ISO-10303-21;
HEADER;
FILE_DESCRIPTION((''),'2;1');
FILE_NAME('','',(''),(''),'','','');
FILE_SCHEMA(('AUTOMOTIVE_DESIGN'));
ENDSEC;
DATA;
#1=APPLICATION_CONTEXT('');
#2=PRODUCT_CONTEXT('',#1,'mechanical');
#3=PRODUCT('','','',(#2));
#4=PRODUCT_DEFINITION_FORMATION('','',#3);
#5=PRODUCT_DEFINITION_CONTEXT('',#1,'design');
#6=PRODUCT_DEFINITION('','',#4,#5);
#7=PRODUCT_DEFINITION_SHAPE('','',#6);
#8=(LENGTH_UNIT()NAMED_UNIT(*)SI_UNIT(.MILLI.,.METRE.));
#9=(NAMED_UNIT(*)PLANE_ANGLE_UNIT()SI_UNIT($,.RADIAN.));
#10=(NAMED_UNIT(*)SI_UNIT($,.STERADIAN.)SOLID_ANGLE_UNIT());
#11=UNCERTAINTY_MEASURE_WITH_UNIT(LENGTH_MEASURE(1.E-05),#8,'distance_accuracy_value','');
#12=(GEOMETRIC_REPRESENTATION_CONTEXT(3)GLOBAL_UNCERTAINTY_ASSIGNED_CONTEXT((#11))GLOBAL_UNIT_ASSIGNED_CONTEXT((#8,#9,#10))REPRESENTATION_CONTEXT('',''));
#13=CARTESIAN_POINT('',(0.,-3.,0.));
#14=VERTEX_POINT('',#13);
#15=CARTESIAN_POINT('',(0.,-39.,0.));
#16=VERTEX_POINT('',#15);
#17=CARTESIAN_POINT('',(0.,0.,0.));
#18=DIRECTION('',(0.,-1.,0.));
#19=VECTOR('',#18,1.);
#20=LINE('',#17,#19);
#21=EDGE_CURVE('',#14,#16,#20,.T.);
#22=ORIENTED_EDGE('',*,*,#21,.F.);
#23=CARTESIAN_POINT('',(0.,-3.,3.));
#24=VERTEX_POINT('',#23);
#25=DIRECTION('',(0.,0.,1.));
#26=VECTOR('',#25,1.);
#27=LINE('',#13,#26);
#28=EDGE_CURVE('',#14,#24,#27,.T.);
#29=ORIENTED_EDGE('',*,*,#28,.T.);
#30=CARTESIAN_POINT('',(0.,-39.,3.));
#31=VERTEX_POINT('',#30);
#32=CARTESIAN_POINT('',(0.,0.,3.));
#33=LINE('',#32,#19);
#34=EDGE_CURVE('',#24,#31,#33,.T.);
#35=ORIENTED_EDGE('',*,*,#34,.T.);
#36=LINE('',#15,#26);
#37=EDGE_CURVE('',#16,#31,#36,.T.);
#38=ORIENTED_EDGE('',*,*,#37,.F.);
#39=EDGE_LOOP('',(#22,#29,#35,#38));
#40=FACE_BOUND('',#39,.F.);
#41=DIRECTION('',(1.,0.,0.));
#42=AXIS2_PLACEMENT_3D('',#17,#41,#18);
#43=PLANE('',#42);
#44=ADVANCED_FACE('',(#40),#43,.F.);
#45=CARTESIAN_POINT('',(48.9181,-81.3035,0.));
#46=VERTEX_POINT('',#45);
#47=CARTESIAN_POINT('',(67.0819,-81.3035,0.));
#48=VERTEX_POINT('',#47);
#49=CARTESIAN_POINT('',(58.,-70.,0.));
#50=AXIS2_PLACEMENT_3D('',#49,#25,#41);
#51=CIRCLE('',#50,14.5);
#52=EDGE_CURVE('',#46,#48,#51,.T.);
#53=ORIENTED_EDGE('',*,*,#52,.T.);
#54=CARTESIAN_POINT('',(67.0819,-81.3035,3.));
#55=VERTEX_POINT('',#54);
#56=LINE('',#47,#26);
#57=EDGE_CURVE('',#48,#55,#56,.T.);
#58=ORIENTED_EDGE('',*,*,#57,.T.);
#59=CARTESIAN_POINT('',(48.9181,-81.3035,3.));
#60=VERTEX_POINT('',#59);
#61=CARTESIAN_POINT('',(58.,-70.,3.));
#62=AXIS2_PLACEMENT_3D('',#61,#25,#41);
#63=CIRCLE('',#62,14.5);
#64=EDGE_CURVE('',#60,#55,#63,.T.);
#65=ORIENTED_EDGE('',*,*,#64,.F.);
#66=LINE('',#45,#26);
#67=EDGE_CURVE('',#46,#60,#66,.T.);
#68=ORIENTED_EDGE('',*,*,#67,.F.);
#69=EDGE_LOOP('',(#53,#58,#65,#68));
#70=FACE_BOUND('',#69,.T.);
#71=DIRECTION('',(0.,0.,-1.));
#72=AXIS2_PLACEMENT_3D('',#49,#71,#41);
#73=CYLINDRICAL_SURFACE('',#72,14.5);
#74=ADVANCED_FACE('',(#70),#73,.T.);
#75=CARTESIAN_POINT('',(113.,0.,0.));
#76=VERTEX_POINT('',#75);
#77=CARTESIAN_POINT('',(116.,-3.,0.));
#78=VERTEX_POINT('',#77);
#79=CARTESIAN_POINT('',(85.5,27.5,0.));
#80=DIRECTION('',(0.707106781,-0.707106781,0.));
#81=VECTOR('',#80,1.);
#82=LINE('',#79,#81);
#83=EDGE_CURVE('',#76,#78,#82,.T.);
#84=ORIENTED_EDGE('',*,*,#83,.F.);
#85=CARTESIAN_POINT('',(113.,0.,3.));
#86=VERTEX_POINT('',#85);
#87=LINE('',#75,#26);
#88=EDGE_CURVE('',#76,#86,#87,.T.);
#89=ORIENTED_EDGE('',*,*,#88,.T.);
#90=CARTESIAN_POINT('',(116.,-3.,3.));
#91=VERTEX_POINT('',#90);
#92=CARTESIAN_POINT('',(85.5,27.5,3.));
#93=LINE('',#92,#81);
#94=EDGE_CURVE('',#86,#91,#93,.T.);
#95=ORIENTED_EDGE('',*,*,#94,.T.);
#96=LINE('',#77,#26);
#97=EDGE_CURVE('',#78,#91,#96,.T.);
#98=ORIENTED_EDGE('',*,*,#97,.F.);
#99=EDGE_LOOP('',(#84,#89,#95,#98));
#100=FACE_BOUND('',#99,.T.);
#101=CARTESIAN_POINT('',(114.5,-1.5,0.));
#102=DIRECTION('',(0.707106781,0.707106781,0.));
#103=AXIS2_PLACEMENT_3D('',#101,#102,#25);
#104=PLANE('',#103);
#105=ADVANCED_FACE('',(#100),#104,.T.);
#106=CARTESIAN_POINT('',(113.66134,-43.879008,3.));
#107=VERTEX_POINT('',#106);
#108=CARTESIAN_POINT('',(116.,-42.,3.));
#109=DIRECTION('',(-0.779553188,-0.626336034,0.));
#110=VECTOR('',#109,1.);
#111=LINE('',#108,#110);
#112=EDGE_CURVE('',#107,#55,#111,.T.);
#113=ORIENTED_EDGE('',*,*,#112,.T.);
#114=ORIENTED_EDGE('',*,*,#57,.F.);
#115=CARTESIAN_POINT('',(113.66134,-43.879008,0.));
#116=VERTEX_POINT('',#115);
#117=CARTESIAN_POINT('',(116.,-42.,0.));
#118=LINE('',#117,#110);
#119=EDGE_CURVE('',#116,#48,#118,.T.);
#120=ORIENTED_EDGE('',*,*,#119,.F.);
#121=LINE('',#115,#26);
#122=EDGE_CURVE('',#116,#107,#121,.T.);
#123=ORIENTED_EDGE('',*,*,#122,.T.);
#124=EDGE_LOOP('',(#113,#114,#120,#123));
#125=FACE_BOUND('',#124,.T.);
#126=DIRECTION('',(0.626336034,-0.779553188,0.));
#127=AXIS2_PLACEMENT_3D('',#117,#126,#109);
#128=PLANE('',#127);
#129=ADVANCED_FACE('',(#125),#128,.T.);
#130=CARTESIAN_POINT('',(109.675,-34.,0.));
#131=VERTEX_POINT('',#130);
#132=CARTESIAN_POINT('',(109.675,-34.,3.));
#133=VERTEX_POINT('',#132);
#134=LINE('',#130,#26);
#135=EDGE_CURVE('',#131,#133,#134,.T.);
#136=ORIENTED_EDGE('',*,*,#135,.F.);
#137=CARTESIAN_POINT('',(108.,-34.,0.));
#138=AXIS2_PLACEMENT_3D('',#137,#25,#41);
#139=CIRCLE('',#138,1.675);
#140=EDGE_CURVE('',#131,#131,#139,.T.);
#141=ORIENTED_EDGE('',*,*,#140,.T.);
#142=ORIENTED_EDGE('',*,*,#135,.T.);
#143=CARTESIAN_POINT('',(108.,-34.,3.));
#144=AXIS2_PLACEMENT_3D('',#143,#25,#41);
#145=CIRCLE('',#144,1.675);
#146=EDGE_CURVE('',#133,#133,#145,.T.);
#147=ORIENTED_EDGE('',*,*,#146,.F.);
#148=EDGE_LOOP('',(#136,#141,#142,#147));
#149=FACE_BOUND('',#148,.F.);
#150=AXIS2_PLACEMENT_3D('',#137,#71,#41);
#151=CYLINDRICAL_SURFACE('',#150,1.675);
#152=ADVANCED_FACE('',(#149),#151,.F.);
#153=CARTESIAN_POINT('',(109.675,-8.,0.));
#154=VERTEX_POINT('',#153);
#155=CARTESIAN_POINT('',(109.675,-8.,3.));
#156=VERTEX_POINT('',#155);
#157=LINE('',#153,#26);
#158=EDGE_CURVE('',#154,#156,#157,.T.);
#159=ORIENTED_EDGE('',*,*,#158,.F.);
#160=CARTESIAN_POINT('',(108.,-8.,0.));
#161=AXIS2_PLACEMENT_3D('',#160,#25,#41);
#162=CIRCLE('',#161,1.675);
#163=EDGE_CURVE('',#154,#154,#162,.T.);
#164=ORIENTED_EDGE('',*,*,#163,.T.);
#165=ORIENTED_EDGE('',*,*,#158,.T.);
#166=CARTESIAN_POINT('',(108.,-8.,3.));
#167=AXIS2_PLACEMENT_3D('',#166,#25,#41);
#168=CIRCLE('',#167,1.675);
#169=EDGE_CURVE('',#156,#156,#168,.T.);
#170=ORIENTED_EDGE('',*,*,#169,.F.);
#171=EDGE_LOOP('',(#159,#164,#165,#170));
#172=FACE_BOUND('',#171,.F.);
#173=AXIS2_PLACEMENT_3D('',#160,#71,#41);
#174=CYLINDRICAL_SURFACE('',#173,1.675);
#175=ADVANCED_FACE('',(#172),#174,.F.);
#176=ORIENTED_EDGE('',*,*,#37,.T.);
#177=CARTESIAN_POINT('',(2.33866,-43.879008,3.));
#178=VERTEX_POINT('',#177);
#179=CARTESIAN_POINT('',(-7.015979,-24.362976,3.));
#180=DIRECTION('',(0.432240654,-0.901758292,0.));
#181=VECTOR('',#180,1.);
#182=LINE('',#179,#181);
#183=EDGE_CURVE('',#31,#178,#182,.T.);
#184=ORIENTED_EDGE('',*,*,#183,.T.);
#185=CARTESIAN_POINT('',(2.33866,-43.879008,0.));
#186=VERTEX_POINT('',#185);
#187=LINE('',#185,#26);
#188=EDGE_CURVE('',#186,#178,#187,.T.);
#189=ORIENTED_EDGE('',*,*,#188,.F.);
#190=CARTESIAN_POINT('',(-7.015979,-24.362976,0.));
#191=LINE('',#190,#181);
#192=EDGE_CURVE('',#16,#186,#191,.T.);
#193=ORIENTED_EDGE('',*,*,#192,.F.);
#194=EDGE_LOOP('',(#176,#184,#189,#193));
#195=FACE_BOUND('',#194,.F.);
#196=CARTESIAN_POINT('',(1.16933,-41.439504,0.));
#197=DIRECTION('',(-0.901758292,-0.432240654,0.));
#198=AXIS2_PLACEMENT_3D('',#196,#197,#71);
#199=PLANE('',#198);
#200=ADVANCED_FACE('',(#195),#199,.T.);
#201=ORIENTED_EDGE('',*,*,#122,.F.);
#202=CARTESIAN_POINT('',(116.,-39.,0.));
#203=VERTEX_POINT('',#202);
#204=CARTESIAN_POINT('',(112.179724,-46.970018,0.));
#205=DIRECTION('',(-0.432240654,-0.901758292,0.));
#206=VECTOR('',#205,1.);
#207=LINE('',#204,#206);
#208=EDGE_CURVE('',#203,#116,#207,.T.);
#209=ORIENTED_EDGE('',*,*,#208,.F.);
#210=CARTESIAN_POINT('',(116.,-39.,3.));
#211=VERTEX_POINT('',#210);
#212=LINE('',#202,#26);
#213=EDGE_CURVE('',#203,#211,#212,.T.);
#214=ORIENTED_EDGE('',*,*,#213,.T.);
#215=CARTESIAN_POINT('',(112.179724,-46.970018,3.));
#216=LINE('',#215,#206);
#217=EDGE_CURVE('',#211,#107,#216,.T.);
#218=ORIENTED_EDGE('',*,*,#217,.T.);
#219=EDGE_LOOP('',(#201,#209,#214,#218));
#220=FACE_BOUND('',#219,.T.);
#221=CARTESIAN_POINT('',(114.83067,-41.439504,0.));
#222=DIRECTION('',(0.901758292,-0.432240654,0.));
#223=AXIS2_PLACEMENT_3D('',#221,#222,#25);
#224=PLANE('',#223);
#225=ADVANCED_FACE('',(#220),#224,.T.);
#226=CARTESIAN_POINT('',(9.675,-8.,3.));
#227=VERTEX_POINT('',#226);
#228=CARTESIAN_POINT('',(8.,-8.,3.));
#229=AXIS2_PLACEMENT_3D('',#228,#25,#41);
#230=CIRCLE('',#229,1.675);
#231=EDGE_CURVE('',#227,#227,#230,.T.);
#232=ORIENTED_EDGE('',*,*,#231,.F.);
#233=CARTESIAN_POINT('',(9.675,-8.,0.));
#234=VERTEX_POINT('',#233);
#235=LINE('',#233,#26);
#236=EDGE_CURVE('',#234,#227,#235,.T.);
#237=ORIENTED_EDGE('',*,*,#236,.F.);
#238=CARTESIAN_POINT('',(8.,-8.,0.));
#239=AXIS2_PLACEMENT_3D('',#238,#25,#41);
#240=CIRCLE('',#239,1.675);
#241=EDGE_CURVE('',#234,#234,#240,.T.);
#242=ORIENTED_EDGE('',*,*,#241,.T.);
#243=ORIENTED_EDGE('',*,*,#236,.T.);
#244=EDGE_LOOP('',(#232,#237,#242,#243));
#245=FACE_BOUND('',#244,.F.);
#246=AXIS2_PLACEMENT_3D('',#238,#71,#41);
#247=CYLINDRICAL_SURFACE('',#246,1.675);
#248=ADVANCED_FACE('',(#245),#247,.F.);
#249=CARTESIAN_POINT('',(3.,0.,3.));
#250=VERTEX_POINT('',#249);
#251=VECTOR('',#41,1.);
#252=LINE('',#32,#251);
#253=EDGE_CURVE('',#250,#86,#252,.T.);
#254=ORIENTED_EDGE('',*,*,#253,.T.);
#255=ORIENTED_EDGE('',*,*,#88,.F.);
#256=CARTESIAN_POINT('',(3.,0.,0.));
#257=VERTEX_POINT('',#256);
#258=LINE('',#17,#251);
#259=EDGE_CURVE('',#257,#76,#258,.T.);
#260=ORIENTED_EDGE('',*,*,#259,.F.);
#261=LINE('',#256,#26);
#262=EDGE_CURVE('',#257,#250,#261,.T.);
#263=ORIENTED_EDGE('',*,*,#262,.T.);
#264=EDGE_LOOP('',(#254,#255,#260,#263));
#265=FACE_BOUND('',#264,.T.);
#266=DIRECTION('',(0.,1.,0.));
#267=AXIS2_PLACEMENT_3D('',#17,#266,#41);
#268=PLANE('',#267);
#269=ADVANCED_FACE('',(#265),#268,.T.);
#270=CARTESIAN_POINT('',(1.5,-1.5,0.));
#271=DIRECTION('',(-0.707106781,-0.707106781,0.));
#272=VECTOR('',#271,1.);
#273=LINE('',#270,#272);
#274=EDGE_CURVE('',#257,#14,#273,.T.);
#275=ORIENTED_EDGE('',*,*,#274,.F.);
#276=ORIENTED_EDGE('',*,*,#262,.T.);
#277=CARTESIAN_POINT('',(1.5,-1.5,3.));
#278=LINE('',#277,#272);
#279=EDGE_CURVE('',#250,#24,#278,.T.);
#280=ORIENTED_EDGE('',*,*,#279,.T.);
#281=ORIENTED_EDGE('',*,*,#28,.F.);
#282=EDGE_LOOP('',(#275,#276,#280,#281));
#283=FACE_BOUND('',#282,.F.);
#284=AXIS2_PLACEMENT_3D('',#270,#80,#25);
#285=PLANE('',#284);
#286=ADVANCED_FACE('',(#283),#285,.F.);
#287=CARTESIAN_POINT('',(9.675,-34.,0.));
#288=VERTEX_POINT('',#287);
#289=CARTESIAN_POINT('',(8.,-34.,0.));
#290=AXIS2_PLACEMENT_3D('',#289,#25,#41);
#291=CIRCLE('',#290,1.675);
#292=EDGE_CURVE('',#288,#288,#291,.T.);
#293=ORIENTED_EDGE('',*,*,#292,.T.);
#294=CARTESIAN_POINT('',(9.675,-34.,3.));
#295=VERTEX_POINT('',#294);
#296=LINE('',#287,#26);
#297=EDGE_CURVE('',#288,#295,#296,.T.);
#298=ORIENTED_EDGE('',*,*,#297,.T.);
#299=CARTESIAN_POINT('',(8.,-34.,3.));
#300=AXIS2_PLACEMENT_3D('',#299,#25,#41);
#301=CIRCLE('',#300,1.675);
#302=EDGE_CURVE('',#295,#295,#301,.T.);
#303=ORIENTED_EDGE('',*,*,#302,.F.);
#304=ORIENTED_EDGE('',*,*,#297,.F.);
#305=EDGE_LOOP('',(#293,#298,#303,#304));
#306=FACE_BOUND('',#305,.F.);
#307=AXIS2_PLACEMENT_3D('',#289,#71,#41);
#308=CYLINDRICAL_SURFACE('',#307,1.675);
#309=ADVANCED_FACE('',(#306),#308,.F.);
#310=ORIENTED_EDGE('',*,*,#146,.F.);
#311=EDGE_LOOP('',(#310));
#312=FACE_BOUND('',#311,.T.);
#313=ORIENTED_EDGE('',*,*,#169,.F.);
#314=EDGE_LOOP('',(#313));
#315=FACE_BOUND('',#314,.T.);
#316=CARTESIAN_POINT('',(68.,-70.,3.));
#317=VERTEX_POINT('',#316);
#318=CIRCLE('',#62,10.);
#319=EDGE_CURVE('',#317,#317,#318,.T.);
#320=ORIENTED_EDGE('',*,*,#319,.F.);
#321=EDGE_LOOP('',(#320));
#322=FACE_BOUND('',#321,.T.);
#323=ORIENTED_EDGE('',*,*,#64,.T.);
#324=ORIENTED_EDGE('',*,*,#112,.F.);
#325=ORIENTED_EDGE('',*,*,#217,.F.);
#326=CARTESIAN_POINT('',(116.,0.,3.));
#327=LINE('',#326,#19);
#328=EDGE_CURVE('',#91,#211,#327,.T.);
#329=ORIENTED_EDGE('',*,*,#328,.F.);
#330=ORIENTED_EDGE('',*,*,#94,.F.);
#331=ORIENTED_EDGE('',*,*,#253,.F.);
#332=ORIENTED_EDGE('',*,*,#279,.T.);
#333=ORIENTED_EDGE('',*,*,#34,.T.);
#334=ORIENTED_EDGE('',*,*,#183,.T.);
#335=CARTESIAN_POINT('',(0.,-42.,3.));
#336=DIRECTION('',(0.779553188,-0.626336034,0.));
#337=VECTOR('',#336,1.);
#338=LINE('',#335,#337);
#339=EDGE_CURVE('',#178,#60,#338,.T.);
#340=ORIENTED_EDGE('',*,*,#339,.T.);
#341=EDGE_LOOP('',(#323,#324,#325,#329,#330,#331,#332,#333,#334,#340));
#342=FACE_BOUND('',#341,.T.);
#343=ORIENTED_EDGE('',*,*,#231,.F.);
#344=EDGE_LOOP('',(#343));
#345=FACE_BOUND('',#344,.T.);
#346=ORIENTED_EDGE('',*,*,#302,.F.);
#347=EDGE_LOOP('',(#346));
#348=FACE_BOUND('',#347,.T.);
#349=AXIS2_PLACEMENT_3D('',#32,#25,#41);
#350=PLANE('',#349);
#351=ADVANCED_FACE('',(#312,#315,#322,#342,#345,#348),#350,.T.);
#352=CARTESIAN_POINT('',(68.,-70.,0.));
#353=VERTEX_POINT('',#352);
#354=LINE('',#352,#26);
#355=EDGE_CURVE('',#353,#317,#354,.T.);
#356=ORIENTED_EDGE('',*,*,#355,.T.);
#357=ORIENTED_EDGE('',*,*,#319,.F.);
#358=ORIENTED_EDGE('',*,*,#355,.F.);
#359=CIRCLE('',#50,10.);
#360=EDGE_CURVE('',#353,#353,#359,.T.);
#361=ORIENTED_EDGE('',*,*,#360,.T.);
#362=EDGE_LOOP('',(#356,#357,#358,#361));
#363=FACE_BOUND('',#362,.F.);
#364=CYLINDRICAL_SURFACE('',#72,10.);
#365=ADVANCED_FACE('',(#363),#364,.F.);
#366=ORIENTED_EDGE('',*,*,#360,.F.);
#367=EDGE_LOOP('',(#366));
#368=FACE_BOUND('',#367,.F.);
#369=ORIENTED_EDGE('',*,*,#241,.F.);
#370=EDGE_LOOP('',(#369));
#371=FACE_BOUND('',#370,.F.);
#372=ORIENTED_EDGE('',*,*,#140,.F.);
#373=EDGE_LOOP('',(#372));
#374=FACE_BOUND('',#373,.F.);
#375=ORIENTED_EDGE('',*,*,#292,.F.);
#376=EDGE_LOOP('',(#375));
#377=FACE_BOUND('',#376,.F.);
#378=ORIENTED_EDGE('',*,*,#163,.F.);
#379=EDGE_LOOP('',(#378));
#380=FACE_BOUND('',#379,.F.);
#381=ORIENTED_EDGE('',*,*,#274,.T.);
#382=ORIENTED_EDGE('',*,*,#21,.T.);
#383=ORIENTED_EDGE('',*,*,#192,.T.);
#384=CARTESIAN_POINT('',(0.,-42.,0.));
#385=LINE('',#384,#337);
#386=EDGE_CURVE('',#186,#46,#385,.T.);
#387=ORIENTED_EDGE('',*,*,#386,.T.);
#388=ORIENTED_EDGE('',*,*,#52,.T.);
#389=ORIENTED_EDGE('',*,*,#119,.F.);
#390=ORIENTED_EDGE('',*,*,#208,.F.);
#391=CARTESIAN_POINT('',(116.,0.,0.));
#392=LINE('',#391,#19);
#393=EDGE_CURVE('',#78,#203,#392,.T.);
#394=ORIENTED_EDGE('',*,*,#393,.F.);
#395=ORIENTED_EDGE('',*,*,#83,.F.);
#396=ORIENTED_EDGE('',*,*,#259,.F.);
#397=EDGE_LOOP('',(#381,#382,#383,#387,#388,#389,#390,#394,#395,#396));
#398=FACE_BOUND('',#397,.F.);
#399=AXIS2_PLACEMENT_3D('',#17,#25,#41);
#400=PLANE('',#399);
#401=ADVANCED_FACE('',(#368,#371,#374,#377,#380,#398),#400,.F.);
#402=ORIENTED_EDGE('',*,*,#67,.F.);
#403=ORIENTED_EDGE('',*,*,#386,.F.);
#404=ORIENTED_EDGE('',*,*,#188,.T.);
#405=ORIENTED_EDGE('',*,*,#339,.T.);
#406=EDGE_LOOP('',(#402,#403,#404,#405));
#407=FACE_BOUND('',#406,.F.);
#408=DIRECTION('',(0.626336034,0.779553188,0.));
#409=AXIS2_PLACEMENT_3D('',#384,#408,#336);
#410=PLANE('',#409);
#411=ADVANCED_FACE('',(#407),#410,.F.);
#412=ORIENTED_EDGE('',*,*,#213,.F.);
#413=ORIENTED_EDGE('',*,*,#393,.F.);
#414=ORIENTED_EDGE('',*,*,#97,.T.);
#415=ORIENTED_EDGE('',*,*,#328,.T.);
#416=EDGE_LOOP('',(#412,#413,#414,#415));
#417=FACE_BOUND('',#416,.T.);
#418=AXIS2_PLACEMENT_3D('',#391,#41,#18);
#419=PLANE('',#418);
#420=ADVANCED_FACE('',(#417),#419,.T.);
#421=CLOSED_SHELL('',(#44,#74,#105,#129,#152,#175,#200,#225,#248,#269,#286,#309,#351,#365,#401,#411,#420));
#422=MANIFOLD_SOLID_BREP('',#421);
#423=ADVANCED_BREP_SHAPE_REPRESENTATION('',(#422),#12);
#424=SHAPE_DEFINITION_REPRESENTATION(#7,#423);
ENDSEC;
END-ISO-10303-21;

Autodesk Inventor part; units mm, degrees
ref_plane "YZ Plane" through (0, 0, 0) normal (1, 0, 0) x (0, 1, 0)
ref_plane "XZ Plane" through (0, 0, 0) normal (0, 1, 0) x (-1, 0, 0)
ref_plane "XY Plane" through (0, 0, 0) normal (0, 0, 1) x (1, 0, 0)
sketch "Sketch1" plane through (0, 0, 0) normal (0, 0, 1) x (1, 0, 0)
  line L0 (0, 0) -> (116, 0)
  line L1 (116, 0) -> (116, -42)
  line L2 (0, 0) -> (0, -42)
  circle A0 centre (8, -8) radius 1.675
  circle A1 centre (108, -8) radius 1.675
  circle A2 centre (8, -34) radius 1.675
  circle A3 centre (108, -34) radius 1.675
  circle A4 centre (58, -70) radius 10
  circle A5 centre (58, -70) radius 14.5
  line L3 (0, -42) -> (48.9181, -81.3035)
  line L4 (116, -42) -> (67.0819, -81.3035)
  dimension "d0" = 116
  dimension "d1" = 42
  dimension "d2" = 3.35
  dimension "d3" = 8
  dimension "d4" = 8
  dimension "d7" = 100
  dimension "d10" = 26
  dimension "d13" = 42
  dimension "d14" = 20
  dimension "d15" = 29
  dimension "d16" = 70
extrude "Plate1" add sketch "Sketch1" along normal blind 3
chamfer "Corner Chamfer1" distance 3 angle 45 4 edges at (0, -42, 1.5) (0, 0, 1.5) (116, 0, 1.5) (116, -42, 1.5)
equation "\"d2\" = rivet_diameter"
equation "\"d13\" = d1"
equation "\"d17\" = Thickness"
equation "\"BendRadius\" = Thickness"
equation "\"BendReliefWidth\" = Thickness"
equation "\"BendReliefDepth\" = 0.5 * Thickness"
equation "\"CornerReliefSize\" = 4 * Thickness"
equation "\"MinimumRemnant\" = 2 * Thickness"
equation "\"TransitionRadius\" = BendRadius"
equation "\"JacobiRadiusSize\" = BendRadius"
equation "\"GapSize\" = Thickness"
equation "\"A_width\" = 46"
equation "\"A_joint_diameter\" = 16"
equation "\"A_joint_tolerance\" = 3"
equation "\"l___________\" = 0"
equation "\"l__________\" = 0"
equation "\"l_________\" = 0"
equation "\"rivet_diameter\" = 3.35"
equation "\"plate_thickness\" = 3"
equation "\"l________\" = 0"
equation "\"A_B_spacing\" = 2"
equation "\"L_Piston_Bottom\" = 21"
equation "\"L_Piston_Top\" = 25"
equation "\"thin_plate\" = 1.5"
equation "\"Thickness\" = 3"
properties part number "A_B_hinge" material "Stainless Steel"
